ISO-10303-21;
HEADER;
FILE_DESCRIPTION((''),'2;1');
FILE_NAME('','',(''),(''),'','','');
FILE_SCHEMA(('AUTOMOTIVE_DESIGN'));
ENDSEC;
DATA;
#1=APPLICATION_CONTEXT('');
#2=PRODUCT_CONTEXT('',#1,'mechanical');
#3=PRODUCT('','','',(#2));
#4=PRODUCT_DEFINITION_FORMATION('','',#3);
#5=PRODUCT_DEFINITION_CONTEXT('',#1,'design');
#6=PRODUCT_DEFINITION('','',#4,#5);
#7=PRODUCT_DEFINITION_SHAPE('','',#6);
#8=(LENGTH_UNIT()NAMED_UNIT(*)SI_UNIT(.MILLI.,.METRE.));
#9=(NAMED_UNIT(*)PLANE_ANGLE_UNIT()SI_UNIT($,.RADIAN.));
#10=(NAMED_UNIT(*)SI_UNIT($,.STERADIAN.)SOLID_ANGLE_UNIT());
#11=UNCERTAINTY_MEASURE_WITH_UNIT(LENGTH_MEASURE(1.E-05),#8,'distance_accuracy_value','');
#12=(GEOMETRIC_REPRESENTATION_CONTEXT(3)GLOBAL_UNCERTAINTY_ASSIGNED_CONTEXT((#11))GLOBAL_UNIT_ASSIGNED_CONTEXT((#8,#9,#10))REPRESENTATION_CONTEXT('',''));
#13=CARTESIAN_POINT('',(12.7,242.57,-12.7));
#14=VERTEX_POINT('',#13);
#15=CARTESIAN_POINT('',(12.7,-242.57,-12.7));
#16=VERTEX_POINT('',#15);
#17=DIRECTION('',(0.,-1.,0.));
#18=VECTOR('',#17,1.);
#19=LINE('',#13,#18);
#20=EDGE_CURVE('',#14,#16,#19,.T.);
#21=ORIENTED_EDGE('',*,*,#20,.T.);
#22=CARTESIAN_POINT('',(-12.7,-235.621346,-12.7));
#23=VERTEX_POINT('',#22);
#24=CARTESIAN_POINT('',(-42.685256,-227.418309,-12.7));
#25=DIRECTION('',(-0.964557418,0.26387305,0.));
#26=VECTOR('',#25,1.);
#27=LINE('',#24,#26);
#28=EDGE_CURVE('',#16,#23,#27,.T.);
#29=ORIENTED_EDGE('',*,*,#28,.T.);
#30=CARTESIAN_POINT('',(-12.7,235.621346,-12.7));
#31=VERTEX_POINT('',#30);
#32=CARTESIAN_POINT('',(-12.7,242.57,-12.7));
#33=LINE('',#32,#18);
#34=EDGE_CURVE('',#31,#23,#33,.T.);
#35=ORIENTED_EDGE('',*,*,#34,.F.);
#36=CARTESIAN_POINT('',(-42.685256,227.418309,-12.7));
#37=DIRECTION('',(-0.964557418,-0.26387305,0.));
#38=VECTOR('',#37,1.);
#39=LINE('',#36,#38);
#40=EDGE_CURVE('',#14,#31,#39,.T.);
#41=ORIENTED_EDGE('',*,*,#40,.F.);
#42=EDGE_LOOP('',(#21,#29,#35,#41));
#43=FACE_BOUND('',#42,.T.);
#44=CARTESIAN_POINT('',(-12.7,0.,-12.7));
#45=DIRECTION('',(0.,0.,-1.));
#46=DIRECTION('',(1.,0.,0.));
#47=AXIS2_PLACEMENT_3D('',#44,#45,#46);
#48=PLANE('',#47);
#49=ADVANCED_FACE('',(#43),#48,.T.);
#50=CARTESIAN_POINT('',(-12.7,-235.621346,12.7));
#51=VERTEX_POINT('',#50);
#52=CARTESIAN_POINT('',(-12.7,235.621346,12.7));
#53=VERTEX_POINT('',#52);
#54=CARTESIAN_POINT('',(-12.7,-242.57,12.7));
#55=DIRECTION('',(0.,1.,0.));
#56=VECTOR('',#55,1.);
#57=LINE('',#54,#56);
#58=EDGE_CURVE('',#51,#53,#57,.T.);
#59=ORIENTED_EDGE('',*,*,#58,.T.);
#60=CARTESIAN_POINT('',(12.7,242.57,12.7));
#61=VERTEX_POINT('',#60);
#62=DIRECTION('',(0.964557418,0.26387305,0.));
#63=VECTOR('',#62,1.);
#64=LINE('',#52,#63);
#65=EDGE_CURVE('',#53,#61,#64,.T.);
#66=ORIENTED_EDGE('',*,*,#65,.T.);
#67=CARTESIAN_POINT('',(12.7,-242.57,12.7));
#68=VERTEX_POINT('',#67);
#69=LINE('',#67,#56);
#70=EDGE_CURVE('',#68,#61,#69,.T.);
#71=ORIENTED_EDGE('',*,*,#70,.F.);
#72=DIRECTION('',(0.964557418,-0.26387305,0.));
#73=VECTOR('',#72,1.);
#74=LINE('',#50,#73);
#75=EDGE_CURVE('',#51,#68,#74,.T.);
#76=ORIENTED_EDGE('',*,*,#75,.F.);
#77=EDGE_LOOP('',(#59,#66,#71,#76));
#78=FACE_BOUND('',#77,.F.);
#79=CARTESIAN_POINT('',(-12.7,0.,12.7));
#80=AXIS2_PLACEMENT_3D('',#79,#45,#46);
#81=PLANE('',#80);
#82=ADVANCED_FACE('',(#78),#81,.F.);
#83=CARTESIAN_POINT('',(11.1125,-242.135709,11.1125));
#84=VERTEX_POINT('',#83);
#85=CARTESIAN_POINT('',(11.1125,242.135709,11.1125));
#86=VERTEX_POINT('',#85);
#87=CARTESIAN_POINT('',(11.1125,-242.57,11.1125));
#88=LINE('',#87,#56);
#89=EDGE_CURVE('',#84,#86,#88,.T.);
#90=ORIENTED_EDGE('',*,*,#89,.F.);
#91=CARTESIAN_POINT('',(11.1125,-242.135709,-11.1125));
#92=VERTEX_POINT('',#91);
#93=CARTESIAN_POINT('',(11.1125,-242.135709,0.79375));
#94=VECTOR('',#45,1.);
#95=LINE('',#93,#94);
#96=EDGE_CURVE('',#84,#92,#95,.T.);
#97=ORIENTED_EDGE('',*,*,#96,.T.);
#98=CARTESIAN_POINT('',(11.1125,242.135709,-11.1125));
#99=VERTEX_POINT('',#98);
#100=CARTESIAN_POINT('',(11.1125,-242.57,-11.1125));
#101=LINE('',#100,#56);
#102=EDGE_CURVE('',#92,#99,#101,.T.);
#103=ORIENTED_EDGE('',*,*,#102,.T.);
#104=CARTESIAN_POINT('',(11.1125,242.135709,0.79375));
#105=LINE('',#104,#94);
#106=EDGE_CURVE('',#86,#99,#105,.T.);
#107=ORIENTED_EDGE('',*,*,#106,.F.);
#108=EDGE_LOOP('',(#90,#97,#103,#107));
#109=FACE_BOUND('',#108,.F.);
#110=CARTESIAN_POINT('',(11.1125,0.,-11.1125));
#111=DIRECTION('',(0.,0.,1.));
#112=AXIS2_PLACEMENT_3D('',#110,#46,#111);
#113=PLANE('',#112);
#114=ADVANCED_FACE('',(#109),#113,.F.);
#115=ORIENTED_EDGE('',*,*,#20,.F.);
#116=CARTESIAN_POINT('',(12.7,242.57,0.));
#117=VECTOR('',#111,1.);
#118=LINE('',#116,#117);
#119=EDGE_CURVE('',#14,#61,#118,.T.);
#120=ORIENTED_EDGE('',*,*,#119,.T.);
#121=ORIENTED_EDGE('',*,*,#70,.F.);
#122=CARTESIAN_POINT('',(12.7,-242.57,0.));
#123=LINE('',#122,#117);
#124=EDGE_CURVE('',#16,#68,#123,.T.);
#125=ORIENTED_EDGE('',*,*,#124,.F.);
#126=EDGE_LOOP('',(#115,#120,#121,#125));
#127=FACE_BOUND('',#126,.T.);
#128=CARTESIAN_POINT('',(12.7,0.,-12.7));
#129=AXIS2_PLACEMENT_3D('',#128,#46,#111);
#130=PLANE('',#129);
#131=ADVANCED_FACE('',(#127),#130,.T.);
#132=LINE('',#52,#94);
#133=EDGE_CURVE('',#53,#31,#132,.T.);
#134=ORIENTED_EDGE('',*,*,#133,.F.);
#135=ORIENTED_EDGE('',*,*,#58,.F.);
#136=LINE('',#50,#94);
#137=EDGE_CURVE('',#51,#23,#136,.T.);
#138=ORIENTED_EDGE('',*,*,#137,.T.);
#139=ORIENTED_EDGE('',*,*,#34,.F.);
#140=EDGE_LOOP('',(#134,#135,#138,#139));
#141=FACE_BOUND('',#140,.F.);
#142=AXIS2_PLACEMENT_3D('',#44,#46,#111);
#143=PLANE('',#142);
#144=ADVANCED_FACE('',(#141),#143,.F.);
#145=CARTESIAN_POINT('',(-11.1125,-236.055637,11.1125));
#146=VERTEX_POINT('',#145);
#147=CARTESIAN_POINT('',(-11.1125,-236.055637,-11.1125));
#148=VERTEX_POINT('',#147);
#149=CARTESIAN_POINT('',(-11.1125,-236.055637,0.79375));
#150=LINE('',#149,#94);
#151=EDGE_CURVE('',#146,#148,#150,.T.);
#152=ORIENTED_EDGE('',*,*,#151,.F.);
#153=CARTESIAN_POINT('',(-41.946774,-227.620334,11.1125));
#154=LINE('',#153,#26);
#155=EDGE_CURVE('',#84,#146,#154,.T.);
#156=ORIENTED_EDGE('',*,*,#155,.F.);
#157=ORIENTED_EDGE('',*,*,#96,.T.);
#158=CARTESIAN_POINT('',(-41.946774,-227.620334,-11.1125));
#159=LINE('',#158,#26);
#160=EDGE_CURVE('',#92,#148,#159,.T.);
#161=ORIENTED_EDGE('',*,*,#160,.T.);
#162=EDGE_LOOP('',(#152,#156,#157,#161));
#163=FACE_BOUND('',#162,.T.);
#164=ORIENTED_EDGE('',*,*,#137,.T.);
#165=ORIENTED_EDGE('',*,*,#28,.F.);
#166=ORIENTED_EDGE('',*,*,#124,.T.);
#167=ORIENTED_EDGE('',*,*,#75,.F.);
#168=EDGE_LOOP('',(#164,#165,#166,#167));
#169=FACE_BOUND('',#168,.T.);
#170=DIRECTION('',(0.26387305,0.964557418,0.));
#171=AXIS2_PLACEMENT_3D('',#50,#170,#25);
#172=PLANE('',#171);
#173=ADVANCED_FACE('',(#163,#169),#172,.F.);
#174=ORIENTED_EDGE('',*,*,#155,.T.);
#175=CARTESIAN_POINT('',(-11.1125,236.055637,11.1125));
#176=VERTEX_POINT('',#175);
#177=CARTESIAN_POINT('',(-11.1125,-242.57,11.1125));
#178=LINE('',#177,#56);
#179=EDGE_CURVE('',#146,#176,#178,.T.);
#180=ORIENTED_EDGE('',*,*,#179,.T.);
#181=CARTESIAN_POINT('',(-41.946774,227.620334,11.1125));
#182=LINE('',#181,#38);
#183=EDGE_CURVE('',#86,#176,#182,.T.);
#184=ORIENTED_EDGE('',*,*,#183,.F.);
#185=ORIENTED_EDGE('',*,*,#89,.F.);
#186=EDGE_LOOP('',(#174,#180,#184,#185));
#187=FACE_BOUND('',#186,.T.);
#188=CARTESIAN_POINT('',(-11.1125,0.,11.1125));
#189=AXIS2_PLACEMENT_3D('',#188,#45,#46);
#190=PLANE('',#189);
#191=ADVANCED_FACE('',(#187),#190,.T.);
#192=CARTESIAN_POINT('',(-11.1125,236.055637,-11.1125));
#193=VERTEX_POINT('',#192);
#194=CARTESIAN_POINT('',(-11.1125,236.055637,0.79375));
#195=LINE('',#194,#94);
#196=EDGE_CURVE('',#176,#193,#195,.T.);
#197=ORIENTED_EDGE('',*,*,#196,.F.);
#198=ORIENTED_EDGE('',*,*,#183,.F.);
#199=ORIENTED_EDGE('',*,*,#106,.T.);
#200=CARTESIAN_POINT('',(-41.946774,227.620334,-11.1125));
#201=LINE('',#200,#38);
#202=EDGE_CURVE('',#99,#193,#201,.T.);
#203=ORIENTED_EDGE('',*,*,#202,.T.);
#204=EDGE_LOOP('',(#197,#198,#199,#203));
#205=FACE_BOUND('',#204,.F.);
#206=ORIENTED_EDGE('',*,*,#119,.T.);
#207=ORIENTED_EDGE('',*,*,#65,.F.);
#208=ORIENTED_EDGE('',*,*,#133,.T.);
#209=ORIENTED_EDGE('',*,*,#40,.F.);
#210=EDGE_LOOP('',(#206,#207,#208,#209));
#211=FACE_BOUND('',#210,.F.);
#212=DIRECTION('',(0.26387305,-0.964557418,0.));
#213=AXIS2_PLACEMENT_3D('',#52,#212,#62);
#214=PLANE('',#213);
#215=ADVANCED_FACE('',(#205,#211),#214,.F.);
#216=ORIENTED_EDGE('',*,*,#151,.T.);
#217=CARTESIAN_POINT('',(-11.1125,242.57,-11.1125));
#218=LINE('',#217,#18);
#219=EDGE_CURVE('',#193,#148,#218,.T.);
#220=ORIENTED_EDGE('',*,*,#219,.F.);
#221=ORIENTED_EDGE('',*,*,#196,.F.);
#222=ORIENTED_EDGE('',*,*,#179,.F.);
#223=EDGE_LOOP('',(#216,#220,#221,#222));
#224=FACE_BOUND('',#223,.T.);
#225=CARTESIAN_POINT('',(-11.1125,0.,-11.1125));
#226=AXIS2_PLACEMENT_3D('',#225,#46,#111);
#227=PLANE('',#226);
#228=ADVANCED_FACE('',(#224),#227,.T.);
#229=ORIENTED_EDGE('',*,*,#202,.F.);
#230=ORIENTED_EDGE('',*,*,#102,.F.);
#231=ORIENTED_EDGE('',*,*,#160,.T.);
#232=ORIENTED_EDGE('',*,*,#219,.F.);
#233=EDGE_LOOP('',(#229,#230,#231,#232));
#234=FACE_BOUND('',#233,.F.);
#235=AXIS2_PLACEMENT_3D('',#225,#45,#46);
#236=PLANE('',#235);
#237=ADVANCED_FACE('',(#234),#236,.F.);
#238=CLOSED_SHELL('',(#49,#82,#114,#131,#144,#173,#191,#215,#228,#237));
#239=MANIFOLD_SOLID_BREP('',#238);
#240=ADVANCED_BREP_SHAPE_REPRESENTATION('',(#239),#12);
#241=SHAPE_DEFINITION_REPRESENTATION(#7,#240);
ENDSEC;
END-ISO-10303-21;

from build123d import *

# Parameters (mm, degrees)
F0_W     = 25.4
F0_H     = 25.4
F0_W_2   = 22.225
F0_H_2   = 22.225
F1_DEPTH = 242.57
F3_DEPTH = 25.401


# Not quite as in the source:
# - a pattern or mirror of a feature is missing from the dataset's text; its kind, count and spacing are read off the source's solid


with BuildPart() as f1:
    # F0 (on Front) → F1 (new body, symmetric)
    with BuildSketch(Plane.XZ):
        Rectangle(F0_W, F0_H)
        Rectangle(F0_W_2, F0_H_2, mode=Mode.SUBTRACT)
    extrude(amount=F1_DEPTH, both=True)

    # F2 (on face) → F3 (cut, through all)
    with BuildSketch(Plane.XY.offset(12.7)):
        Polygon((12.7, 242.57), (-12.7, 242.57), (-12.7, 235.6213463057), align=None)
    f3 = extrude(amount=-F3_DEPTH, mode=Mode.SUBTRACT)

    # F3_copies: F3 across plane
    add(f3.mirror(Plane(origin=(0, 0, 0), x_dir=(0, 0, -1), z_dir=(0, -1, 0))), mode=Mode.SUBTRACT)


solid = f1.part
